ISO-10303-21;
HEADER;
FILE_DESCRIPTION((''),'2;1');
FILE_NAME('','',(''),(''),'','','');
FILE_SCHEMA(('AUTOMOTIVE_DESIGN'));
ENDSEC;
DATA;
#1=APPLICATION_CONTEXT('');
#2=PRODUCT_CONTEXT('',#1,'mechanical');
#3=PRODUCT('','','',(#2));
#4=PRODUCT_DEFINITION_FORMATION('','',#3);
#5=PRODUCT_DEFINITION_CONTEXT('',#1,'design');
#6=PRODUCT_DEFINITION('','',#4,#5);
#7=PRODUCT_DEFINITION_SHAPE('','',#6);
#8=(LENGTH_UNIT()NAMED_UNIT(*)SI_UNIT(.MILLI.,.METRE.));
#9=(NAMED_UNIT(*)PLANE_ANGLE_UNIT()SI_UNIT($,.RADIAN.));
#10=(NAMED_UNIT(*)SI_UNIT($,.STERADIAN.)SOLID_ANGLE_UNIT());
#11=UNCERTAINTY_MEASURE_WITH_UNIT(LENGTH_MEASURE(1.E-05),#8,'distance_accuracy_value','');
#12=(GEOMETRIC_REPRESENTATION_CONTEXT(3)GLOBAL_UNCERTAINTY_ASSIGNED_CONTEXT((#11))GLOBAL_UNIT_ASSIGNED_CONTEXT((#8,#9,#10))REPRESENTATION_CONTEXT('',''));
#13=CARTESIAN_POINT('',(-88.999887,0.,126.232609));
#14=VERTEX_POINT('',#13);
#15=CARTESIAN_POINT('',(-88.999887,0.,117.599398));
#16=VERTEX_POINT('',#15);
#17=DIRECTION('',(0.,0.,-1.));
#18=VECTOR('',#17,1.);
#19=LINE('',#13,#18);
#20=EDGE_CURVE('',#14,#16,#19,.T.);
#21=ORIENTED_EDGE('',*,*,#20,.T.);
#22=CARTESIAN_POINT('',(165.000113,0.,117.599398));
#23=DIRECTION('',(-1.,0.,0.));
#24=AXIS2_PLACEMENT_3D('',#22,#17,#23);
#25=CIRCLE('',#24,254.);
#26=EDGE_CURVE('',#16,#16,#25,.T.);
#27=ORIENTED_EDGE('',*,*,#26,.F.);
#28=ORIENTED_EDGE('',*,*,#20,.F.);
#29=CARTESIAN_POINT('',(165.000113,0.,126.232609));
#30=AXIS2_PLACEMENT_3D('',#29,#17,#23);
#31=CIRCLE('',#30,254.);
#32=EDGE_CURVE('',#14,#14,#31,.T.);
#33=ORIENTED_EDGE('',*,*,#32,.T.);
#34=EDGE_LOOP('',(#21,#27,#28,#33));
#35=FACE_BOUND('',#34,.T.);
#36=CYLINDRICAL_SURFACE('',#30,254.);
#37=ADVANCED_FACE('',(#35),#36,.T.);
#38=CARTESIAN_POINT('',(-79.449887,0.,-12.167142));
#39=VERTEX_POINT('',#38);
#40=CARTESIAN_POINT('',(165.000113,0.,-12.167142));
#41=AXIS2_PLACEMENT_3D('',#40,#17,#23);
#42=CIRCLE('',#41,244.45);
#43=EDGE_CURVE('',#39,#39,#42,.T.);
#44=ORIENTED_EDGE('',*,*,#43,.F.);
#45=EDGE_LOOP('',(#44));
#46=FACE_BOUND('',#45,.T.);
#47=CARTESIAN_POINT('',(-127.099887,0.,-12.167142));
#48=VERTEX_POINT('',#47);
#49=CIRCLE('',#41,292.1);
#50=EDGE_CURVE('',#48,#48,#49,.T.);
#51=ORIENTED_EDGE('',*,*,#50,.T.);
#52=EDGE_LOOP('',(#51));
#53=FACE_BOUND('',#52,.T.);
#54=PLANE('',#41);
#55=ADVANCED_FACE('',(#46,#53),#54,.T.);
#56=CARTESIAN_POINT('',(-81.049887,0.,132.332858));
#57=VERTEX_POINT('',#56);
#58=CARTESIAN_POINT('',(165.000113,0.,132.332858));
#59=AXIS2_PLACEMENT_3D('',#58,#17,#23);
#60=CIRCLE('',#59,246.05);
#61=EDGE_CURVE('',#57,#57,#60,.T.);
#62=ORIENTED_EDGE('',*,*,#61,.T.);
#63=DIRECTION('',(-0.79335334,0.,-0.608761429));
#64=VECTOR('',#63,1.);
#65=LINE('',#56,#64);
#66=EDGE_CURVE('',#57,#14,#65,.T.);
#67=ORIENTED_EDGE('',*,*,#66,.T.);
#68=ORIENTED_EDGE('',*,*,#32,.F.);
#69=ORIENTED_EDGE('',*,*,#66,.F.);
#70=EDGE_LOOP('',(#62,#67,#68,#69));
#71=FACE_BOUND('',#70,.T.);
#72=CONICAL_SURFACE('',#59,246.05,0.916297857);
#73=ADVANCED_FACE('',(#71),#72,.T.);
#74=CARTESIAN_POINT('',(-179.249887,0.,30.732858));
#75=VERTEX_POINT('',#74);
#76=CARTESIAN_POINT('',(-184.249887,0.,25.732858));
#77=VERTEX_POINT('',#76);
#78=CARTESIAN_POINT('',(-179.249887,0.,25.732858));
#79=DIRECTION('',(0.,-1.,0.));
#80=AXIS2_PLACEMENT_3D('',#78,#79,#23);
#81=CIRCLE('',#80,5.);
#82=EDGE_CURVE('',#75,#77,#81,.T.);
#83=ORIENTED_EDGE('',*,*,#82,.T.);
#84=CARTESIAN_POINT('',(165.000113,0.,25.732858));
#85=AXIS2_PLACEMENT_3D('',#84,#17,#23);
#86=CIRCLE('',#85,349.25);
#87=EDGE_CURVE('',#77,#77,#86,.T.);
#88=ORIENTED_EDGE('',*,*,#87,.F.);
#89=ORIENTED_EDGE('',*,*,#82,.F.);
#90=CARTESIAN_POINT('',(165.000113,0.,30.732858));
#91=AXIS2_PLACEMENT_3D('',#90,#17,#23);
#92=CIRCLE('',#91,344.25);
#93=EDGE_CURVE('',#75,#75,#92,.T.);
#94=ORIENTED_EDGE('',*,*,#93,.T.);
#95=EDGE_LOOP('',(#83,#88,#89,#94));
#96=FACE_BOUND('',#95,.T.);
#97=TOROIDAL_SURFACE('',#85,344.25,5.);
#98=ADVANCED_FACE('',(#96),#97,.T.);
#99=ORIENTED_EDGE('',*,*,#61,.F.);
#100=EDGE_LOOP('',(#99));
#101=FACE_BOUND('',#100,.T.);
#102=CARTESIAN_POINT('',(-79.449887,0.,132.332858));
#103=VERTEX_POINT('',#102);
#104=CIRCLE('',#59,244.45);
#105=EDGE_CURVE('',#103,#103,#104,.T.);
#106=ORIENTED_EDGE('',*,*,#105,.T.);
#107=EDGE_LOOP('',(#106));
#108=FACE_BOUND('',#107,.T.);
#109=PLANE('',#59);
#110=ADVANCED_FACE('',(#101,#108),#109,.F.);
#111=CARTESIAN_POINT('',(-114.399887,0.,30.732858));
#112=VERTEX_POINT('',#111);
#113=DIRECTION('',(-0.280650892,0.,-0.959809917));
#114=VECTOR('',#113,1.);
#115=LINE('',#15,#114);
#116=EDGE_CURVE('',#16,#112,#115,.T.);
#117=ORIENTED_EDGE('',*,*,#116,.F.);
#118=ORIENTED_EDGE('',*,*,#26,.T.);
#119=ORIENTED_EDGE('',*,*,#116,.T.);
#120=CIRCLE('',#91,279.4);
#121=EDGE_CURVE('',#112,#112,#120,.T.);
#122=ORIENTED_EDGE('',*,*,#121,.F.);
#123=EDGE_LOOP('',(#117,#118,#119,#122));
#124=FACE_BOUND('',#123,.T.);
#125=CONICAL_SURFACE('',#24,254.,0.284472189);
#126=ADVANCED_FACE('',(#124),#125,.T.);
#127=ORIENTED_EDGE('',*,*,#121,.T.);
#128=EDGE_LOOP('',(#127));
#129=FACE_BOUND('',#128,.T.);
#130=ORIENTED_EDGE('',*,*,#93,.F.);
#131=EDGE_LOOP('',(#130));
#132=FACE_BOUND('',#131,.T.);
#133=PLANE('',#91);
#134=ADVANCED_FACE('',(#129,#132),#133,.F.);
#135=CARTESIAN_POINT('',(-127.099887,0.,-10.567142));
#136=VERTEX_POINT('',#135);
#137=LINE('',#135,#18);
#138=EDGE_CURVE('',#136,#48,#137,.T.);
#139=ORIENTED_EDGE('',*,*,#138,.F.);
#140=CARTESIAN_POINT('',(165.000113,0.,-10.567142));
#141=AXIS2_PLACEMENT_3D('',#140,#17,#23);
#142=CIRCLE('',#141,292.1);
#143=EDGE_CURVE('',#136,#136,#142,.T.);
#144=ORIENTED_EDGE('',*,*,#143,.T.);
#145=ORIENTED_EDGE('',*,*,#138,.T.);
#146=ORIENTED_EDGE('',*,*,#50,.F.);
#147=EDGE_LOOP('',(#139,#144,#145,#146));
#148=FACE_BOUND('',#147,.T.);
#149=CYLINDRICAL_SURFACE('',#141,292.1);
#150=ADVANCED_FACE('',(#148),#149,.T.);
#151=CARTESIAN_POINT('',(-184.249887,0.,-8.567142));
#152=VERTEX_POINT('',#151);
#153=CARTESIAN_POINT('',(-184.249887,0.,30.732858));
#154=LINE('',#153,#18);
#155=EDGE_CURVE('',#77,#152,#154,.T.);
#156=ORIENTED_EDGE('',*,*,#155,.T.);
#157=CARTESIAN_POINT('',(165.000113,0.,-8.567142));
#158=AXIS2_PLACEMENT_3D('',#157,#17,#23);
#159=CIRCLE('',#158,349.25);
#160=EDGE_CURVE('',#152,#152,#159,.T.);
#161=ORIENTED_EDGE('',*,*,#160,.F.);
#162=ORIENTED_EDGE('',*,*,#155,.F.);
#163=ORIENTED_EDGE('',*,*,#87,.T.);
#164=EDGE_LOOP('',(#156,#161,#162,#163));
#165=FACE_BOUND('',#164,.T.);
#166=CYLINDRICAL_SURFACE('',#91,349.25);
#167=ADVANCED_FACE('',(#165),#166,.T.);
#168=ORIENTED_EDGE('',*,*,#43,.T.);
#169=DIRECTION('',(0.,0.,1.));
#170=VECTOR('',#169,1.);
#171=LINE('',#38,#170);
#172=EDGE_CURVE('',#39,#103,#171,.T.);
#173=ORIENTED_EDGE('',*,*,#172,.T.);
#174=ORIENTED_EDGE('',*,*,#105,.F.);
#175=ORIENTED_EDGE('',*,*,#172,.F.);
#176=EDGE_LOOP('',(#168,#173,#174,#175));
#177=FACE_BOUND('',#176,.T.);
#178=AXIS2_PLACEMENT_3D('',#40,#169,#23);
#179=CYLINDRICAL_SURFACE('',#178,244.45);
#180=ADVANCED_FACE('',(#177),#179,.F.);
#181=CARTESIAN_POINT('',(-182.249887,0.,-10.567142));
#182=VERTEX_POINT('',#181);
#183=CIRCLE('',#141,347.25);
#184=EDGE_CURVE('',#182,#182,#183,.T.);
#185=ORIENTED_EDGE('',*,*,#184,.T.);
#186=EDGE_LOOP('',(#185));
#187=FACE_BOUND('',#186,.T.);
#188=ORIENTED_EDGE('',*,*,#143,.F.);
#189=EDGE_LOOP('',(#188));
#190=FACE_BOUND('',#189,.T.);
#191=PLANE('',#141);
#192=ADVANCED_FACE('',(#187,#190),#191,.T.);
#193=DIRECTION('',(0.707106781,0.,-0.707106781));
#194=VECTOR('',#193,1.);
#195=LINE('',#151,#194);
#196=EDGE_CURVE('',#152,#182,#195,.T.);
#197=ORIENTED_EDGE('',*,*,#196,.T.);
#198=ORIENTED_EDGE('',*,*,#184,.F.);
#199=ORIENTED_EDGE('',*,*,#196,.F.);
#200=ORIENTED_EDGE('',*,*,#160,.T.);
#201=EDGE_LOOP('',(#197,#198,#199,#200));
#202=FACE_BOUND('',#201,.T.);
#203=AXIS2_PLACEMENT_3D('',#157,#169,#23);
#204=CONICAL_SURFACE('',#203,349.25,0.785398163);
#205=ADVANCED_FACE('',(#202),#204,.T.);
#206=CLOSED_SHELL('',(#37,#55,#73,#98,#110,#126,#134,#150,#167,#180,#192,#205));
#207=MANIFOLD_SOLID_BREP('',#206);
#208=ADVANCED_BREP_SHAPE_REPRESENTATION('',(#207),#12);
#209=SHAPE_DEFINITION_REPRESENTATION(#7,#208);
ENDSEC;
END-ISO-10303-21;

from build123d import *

# Parameters (mm, degrees)
F2_R    = 5
F3_SIZE = 2


with BuildPart() as f1:
    # F0 (on Front) → F1 (revolve)
    with BuildSketch(Plane.XZ):
        Polygon((-79.4498865843, -12.1671419008), (-79.4498865843, 132.3328580992), (-81.0498865843, 132.3328580992), (-88.9998865843, 126.2326085448), (-88.9998865843, 117.5993978977), (-114.3998865843, 30.7328580992), (-184.2498865843, 30.7328580992), (-184.2498865843, -10.5671419008), (-127.0998865843, -10.5671419008), (-127.0998865843, -12.1671419008), align=None)
    revolve(axis=Axis((165.0001134157, 0, 0.9622275829), (0, 0, -1)))

    # F2
    f2_edges = [f1.edges().sort_by_distance(p)[0] for p in [
        (514.250113, 0, 30.732858),
    ]]
    fillet(f2_edges, radius=F2_R)

    # F3
    f3_edges = [f1.edges().sort_by_distance(p)[0] for p in [
        (514.250113, 0, -10.567142),
    ]]
    chamfer(f3_edges, length=F3_SIZE)


solid = f1.part
